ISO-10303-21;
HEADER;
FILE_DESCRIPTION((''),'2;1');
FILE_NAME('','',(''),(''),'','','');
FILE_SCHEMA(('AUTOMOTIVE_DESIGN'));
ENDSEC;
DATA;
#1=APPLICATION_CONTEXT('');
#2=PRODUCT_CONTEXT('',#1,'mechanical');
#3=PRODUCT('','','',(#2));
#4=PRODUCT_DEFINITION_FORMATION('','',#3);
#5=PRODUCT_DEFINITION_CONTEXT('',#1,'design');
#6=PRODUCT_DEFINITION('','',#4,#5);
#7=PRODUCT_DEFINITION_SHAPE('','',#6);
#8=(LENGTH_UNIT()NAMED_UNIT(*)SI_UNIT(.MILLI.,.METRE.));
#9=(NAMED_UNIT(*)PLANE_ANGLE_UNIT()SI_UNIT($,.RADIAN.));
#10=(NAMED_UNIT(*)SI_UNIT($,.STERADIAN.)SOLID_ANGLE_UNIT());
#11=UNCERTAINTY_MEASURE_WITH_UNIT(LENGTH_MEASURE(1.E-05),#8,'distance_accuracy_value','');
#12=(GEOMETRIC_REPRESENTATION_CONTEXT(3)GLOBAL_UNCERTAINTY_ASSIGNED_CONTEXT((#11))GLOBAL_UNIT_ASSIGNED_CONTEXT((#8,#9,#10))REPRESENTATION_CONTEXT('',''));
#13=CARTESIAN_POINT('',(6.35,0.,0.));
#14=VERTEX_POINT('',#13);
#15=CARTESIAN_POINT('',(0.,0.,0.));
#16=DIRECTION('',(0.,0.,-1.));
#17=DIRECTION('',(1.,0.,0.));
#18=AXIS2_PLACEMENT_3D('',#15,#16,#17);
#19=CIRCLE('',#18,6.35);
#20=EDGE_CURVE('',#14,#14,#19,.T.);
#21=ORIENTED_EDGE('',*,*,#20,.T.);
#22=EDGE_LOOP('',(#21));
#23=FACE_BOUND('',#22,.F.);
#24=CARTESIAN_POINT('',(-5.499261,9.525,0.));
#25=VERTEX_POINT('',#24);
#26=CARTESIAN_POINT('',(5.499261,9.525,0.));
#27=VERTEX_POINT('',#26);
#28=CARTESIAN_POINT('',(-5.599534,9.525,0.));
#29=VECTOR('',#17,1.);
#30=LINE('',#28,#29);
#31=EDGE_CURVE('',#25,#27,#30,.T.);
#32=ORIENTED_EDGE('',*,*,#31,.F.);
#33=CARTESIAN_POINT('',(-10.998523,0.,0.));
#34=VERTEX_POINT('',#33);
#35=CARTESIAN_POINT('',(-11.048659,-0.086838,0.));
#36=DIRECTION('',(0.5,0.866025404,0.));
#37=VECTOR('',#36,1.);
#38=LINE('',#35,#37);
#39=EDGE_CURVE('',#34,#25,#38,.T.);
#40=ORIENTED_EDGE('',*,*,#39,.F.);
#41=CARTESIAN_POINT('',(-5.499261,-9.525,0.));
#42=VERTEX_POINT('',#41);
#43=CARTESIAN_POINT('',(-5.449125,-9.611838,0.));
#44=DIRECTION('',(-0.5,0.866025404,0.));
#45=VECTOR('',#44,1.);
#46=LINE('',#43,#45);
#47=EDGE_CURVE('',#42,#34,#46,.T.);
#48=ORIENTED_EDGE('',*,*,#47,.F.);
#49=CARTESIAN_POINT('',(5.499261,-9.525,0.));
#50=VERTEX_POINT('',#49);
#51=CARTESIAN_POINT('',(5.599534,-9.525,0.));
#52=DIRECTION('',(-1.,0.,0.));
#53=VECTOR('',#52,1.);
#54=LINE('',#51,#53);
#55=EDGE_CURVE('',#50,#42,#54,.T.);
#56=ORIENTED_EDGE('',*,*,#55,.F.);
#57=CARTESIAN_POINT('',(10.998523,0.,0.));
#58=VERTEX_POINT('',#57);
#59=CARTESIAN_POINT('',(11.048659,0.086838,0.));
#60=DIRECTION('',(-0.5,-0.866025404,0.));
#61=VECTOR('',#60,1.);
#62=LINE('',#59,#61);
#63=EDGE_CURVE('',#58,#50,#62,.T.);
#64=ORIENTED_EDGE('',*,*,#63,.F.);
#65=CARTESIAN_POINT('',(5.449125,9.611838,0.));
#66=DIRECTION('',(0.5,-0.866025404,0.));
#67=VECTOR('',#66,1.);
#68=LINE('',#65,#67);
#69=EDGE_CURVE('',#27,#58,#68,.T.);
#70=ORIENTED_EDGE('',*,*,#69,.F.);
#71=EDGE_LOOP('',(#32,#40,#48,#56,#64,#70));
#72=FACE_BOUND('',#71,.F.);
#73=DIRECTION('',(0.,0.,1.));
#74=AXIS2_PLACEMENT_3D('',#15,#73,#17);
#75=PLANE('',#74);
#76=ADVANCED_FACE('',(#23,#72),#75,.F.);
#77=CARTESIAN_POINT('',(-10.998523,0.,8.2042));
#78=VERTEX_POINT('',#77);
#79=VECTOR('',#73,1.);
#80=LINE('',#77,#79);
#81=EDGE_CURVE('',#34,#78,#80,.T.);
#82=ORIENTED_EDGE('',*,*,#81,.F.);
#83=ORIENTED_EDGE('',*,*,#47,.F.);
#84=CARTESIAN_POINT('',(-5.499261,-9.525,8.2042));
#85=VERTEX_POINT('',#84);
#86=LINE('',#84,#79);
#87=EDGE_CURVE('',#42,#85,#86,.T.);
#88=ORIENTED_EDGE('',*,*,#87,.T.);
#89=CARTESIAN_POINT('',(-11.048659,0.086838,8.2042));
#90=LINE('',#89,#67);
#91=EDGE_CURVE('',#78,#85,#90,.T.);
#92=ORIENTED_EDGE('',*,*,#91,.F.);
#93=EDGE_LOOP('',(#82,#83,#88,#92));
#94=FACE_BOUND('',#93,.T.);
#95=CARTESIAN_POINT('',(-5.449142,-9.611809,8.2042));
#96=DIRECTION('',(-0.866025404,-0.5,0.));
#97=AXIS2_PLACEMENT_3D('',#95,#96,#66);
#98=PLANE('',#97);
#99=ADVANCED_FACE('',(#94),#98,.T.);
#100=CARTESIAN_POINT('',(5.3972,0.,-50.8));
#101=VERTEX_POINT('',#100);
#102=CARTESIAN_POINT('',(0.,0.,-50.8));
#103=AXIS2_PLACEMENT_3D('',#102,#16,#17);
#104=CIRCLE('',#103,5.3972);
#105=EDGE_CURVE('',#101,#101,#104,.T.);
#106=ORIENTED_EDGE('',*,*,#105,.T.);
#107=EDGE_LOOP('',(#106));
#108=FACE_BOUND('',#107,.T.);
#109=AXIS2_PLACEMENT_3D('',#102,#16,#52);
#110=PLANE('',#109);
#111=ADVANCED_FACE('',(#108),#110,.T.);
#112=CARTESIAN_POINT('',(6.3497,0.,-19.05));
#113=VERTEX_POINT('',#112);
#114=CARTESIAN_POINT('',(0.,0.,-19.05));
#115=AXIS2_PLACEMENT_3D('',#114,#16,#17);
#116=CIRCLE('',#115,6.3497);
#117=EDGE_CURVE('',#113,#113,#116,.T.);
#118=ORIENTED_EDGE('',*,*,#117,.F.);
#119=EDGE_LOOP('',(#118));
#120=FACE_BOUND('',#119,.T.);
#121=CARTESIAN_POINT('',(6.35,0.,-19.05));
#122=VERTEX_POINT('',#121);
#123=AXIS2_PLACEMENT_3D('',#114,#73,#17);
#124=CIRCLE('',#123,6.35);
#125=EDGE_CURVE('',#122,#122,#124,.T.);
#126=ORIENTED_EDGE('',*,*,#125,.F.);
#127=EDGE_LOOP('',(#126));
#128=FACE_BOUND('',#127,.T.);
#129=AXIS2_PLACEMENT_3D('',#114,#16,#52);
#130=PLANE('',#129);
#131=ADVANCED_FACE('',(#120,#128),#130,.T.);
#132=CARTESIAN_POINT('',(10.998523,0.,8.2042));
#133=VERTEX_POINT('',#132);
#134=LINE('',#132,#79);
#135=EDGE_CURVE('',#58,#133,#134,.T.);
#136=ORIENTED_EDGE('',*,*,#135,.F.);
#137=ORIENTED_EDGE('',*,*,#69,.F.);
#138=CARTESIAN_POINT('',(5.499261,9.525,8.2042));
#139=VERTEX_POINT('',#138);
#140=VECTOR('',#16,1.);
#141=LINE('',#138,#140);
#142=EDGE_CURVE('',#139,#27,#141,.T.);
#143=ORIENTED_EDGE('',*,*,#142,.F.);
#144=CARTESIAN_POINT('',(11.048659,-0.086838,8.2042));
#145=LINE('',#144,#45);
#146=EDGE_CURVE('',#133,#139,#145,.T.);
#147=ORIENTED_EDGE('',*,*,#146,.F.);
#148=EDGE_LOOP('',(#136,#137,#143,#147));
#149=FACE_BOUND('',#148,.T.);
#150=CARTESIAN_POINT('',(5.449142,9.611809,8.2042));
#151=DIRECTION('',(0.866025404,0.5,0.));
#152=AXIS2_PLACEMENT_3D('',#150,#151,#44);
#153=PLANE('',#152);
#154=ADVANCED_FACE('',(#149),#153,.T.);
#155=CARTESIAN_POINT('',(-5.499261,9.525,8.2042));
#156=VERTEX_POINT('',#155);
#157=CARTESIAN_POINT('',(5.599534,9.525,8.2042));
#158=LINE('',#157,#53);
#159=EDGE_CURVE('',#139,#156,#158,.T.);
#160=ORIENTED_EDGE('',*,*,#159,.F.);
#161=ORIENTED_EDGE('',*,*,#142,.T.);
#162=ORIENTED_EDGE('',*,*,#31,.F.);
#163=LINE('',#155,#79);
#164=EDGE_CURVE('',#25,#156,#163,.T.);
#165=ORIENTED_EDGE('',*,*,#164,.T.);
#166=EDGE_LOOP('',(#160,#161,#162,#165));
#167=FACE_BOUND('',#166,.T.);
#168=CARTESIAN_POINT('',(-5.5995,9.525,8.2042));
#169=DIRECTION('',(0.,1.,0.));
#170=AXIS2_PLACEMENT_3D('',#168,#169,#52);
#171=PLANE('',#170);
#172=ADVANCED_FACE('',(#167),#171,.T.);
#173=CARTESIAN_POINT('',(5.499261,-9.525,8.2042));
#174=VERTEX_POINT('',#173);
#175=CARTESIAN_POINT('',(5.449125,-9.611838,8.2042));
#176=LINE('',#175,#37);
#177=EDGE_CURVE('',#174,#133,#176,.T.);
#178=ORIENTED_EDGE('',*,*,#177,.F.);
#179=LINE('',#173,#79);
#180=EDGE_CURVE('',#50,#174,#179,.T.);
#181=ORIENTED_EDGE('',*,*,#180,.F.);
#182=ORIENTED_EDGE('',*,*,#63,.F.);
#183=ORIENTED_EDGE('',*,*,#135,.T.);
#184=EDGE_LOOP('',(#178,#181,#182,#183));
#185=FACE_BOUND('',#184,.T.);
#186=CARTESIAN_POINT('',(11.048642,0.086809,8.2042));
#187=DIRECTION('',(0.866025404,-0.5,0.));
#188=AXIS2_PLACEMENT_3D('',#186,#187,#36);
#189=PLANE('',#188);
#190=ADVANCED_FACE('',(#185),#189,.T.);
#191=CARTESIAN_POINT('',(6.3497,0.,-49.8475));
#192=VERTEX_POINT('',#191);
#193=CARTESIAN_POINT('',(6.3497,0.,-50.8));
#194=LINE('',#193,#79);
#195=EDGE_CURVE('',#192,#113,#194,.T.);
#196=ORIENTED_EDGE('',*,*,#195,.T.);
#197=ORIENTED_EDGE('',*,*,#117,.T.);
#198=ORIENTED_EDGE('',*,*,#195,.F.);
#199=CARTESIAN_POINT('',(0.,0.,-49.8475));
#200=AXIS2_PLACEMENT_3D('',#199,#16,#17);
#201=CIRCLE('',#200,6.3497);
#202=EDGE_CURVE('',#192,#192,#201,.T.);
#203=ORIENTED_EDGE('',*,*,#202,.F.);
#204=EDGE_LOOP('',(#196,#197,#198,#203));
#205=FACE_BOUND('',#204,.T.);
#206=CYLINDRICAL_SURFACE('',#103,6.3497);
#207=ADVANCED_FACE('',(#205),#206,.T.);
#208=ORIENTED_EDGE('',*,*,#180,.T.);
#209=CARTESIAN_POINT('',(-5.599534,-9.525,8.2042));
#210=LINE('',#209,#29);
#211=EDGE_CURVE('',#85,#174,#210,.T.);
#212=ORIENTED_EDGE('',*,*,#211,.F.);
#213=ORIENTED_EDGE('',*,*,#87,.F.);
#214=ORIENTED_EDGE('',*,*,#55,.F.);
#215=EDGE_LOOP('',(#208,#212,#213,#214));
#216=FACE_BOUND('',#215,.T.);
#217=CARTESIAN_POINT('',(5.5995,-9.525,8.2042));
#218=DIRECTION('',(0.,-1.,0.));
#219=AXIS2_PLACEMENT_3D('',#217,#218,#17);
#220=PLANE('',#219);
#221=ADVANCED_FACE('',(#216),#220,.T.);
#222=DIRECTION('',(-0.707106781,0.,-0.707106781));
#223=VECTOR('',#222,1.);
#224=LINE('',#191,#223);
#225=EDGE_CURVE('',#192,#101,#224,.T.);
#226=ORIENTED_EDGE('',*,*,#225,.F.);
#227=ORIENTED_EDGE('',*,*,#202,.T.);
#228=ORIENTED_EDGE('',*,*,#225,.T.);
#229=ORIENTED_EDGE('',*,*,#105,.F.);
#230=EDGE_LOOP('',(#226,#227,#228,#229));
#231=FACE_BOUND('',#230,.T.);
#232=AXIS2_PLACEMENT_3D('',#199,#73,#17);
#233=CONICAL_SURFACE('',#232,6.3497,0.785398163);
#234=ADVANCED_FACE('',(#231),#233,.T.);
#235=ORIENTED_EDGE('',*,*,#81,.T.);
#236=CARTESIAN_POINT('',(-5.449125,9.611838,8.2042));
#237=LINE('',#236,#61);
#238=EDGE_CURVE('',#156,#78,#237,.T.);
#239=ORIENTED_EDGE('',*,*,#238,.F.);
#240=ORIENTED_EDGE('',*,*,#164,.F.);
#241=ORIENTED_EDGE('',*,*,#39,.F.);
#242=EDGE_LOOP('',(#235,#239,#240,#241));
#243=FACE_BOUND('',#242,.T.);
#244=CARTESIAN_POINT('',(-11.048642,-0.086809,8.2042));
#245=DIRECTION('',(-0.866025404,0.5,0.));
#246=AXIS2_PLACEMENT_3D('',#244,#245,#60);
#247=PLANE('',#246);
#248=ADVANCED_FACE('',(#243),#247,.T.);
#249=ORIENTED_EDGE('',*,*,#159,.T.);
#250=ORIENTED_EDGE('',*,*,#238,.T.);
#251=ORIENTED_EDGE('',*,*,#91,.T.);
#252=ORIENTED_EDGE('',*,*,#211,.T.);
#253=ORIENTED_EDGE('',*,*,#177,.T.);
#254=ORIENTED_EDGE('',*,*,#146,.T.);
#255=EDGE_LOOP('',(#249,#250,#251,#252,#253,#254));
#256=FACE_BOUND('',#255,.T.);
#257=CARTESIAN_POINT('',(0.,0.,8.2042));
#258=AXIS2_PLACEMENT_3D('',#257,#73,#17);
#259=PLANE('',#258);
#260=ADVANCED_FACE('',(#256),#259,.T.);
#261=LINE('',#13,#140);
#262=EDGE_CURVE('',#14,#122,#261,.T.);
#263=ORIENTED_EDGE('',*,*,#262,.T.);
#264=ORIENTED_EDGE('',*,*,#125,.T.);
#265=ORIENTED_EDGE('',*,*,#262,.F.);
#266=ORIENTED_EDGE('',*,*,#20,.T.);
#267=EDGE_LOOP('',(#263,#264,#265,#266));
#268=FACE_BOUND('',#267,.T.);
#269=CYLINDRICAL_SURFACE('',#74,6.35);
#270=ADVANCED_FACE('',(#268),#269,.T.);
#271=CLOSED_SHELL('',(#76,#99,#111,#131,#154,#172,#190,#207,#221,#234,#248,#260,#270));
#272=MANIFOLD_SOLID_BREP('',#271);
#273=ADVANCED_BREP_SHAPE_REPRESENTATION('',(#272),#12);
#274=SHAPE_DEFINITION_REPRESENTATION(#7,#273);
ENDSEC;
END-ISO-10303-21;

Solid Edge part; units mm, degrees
sketch "Sketch1" plane through (0, 0, 0) normal (0, 0, 1) x (1, 0, 0)
  circle A0 centre (0, 0) radius 11.049
  dimension "D1" = 22.098
extrude "Protrusion1" add sketch "Sketch1" along normal blind 8.2042
sketch "Sketch2" plane through (0, 0, 0) normal (0, 0, -1) x (1, 0, 0)
  circle A0 centre (0, 0) radius 6.35
extrude "Protrusion2" add sketch "Sketch2" along normal blind 50.8
sketch "Sketch3" plane through (0, 0, -50.8) normal (0, 0, -1) x (1, 0, 0)
  circle A0 centre (0, 0) radius 6.3497
extrude "Cutout1" cut sketch "Sketch3" against normal blind 31.75 flip side to cut
chamfer "Chamfer_1" distance 0.9525 angle 45 1 edges at (-6.3497, 0, -50.8)
sketch "Sketch4" plane through (0, 0, 8.2042) normal (0, 0, 1) x (1, 0, 0)
  line L0 (-5.5995, 9.525) -> (5.5995, 9.525)
  dimension "D1" = 19.05
extrude "Cutout2" cut sketch "Sketch4" against normal up to next material side at (0, 9.575, 8.2042)
pattern_circular "Pattern1" count 6 over 360 about axis through (0, 0, 8.2042) along (0, 0, 1) of "Cutout2"
properties part number "24107017"
